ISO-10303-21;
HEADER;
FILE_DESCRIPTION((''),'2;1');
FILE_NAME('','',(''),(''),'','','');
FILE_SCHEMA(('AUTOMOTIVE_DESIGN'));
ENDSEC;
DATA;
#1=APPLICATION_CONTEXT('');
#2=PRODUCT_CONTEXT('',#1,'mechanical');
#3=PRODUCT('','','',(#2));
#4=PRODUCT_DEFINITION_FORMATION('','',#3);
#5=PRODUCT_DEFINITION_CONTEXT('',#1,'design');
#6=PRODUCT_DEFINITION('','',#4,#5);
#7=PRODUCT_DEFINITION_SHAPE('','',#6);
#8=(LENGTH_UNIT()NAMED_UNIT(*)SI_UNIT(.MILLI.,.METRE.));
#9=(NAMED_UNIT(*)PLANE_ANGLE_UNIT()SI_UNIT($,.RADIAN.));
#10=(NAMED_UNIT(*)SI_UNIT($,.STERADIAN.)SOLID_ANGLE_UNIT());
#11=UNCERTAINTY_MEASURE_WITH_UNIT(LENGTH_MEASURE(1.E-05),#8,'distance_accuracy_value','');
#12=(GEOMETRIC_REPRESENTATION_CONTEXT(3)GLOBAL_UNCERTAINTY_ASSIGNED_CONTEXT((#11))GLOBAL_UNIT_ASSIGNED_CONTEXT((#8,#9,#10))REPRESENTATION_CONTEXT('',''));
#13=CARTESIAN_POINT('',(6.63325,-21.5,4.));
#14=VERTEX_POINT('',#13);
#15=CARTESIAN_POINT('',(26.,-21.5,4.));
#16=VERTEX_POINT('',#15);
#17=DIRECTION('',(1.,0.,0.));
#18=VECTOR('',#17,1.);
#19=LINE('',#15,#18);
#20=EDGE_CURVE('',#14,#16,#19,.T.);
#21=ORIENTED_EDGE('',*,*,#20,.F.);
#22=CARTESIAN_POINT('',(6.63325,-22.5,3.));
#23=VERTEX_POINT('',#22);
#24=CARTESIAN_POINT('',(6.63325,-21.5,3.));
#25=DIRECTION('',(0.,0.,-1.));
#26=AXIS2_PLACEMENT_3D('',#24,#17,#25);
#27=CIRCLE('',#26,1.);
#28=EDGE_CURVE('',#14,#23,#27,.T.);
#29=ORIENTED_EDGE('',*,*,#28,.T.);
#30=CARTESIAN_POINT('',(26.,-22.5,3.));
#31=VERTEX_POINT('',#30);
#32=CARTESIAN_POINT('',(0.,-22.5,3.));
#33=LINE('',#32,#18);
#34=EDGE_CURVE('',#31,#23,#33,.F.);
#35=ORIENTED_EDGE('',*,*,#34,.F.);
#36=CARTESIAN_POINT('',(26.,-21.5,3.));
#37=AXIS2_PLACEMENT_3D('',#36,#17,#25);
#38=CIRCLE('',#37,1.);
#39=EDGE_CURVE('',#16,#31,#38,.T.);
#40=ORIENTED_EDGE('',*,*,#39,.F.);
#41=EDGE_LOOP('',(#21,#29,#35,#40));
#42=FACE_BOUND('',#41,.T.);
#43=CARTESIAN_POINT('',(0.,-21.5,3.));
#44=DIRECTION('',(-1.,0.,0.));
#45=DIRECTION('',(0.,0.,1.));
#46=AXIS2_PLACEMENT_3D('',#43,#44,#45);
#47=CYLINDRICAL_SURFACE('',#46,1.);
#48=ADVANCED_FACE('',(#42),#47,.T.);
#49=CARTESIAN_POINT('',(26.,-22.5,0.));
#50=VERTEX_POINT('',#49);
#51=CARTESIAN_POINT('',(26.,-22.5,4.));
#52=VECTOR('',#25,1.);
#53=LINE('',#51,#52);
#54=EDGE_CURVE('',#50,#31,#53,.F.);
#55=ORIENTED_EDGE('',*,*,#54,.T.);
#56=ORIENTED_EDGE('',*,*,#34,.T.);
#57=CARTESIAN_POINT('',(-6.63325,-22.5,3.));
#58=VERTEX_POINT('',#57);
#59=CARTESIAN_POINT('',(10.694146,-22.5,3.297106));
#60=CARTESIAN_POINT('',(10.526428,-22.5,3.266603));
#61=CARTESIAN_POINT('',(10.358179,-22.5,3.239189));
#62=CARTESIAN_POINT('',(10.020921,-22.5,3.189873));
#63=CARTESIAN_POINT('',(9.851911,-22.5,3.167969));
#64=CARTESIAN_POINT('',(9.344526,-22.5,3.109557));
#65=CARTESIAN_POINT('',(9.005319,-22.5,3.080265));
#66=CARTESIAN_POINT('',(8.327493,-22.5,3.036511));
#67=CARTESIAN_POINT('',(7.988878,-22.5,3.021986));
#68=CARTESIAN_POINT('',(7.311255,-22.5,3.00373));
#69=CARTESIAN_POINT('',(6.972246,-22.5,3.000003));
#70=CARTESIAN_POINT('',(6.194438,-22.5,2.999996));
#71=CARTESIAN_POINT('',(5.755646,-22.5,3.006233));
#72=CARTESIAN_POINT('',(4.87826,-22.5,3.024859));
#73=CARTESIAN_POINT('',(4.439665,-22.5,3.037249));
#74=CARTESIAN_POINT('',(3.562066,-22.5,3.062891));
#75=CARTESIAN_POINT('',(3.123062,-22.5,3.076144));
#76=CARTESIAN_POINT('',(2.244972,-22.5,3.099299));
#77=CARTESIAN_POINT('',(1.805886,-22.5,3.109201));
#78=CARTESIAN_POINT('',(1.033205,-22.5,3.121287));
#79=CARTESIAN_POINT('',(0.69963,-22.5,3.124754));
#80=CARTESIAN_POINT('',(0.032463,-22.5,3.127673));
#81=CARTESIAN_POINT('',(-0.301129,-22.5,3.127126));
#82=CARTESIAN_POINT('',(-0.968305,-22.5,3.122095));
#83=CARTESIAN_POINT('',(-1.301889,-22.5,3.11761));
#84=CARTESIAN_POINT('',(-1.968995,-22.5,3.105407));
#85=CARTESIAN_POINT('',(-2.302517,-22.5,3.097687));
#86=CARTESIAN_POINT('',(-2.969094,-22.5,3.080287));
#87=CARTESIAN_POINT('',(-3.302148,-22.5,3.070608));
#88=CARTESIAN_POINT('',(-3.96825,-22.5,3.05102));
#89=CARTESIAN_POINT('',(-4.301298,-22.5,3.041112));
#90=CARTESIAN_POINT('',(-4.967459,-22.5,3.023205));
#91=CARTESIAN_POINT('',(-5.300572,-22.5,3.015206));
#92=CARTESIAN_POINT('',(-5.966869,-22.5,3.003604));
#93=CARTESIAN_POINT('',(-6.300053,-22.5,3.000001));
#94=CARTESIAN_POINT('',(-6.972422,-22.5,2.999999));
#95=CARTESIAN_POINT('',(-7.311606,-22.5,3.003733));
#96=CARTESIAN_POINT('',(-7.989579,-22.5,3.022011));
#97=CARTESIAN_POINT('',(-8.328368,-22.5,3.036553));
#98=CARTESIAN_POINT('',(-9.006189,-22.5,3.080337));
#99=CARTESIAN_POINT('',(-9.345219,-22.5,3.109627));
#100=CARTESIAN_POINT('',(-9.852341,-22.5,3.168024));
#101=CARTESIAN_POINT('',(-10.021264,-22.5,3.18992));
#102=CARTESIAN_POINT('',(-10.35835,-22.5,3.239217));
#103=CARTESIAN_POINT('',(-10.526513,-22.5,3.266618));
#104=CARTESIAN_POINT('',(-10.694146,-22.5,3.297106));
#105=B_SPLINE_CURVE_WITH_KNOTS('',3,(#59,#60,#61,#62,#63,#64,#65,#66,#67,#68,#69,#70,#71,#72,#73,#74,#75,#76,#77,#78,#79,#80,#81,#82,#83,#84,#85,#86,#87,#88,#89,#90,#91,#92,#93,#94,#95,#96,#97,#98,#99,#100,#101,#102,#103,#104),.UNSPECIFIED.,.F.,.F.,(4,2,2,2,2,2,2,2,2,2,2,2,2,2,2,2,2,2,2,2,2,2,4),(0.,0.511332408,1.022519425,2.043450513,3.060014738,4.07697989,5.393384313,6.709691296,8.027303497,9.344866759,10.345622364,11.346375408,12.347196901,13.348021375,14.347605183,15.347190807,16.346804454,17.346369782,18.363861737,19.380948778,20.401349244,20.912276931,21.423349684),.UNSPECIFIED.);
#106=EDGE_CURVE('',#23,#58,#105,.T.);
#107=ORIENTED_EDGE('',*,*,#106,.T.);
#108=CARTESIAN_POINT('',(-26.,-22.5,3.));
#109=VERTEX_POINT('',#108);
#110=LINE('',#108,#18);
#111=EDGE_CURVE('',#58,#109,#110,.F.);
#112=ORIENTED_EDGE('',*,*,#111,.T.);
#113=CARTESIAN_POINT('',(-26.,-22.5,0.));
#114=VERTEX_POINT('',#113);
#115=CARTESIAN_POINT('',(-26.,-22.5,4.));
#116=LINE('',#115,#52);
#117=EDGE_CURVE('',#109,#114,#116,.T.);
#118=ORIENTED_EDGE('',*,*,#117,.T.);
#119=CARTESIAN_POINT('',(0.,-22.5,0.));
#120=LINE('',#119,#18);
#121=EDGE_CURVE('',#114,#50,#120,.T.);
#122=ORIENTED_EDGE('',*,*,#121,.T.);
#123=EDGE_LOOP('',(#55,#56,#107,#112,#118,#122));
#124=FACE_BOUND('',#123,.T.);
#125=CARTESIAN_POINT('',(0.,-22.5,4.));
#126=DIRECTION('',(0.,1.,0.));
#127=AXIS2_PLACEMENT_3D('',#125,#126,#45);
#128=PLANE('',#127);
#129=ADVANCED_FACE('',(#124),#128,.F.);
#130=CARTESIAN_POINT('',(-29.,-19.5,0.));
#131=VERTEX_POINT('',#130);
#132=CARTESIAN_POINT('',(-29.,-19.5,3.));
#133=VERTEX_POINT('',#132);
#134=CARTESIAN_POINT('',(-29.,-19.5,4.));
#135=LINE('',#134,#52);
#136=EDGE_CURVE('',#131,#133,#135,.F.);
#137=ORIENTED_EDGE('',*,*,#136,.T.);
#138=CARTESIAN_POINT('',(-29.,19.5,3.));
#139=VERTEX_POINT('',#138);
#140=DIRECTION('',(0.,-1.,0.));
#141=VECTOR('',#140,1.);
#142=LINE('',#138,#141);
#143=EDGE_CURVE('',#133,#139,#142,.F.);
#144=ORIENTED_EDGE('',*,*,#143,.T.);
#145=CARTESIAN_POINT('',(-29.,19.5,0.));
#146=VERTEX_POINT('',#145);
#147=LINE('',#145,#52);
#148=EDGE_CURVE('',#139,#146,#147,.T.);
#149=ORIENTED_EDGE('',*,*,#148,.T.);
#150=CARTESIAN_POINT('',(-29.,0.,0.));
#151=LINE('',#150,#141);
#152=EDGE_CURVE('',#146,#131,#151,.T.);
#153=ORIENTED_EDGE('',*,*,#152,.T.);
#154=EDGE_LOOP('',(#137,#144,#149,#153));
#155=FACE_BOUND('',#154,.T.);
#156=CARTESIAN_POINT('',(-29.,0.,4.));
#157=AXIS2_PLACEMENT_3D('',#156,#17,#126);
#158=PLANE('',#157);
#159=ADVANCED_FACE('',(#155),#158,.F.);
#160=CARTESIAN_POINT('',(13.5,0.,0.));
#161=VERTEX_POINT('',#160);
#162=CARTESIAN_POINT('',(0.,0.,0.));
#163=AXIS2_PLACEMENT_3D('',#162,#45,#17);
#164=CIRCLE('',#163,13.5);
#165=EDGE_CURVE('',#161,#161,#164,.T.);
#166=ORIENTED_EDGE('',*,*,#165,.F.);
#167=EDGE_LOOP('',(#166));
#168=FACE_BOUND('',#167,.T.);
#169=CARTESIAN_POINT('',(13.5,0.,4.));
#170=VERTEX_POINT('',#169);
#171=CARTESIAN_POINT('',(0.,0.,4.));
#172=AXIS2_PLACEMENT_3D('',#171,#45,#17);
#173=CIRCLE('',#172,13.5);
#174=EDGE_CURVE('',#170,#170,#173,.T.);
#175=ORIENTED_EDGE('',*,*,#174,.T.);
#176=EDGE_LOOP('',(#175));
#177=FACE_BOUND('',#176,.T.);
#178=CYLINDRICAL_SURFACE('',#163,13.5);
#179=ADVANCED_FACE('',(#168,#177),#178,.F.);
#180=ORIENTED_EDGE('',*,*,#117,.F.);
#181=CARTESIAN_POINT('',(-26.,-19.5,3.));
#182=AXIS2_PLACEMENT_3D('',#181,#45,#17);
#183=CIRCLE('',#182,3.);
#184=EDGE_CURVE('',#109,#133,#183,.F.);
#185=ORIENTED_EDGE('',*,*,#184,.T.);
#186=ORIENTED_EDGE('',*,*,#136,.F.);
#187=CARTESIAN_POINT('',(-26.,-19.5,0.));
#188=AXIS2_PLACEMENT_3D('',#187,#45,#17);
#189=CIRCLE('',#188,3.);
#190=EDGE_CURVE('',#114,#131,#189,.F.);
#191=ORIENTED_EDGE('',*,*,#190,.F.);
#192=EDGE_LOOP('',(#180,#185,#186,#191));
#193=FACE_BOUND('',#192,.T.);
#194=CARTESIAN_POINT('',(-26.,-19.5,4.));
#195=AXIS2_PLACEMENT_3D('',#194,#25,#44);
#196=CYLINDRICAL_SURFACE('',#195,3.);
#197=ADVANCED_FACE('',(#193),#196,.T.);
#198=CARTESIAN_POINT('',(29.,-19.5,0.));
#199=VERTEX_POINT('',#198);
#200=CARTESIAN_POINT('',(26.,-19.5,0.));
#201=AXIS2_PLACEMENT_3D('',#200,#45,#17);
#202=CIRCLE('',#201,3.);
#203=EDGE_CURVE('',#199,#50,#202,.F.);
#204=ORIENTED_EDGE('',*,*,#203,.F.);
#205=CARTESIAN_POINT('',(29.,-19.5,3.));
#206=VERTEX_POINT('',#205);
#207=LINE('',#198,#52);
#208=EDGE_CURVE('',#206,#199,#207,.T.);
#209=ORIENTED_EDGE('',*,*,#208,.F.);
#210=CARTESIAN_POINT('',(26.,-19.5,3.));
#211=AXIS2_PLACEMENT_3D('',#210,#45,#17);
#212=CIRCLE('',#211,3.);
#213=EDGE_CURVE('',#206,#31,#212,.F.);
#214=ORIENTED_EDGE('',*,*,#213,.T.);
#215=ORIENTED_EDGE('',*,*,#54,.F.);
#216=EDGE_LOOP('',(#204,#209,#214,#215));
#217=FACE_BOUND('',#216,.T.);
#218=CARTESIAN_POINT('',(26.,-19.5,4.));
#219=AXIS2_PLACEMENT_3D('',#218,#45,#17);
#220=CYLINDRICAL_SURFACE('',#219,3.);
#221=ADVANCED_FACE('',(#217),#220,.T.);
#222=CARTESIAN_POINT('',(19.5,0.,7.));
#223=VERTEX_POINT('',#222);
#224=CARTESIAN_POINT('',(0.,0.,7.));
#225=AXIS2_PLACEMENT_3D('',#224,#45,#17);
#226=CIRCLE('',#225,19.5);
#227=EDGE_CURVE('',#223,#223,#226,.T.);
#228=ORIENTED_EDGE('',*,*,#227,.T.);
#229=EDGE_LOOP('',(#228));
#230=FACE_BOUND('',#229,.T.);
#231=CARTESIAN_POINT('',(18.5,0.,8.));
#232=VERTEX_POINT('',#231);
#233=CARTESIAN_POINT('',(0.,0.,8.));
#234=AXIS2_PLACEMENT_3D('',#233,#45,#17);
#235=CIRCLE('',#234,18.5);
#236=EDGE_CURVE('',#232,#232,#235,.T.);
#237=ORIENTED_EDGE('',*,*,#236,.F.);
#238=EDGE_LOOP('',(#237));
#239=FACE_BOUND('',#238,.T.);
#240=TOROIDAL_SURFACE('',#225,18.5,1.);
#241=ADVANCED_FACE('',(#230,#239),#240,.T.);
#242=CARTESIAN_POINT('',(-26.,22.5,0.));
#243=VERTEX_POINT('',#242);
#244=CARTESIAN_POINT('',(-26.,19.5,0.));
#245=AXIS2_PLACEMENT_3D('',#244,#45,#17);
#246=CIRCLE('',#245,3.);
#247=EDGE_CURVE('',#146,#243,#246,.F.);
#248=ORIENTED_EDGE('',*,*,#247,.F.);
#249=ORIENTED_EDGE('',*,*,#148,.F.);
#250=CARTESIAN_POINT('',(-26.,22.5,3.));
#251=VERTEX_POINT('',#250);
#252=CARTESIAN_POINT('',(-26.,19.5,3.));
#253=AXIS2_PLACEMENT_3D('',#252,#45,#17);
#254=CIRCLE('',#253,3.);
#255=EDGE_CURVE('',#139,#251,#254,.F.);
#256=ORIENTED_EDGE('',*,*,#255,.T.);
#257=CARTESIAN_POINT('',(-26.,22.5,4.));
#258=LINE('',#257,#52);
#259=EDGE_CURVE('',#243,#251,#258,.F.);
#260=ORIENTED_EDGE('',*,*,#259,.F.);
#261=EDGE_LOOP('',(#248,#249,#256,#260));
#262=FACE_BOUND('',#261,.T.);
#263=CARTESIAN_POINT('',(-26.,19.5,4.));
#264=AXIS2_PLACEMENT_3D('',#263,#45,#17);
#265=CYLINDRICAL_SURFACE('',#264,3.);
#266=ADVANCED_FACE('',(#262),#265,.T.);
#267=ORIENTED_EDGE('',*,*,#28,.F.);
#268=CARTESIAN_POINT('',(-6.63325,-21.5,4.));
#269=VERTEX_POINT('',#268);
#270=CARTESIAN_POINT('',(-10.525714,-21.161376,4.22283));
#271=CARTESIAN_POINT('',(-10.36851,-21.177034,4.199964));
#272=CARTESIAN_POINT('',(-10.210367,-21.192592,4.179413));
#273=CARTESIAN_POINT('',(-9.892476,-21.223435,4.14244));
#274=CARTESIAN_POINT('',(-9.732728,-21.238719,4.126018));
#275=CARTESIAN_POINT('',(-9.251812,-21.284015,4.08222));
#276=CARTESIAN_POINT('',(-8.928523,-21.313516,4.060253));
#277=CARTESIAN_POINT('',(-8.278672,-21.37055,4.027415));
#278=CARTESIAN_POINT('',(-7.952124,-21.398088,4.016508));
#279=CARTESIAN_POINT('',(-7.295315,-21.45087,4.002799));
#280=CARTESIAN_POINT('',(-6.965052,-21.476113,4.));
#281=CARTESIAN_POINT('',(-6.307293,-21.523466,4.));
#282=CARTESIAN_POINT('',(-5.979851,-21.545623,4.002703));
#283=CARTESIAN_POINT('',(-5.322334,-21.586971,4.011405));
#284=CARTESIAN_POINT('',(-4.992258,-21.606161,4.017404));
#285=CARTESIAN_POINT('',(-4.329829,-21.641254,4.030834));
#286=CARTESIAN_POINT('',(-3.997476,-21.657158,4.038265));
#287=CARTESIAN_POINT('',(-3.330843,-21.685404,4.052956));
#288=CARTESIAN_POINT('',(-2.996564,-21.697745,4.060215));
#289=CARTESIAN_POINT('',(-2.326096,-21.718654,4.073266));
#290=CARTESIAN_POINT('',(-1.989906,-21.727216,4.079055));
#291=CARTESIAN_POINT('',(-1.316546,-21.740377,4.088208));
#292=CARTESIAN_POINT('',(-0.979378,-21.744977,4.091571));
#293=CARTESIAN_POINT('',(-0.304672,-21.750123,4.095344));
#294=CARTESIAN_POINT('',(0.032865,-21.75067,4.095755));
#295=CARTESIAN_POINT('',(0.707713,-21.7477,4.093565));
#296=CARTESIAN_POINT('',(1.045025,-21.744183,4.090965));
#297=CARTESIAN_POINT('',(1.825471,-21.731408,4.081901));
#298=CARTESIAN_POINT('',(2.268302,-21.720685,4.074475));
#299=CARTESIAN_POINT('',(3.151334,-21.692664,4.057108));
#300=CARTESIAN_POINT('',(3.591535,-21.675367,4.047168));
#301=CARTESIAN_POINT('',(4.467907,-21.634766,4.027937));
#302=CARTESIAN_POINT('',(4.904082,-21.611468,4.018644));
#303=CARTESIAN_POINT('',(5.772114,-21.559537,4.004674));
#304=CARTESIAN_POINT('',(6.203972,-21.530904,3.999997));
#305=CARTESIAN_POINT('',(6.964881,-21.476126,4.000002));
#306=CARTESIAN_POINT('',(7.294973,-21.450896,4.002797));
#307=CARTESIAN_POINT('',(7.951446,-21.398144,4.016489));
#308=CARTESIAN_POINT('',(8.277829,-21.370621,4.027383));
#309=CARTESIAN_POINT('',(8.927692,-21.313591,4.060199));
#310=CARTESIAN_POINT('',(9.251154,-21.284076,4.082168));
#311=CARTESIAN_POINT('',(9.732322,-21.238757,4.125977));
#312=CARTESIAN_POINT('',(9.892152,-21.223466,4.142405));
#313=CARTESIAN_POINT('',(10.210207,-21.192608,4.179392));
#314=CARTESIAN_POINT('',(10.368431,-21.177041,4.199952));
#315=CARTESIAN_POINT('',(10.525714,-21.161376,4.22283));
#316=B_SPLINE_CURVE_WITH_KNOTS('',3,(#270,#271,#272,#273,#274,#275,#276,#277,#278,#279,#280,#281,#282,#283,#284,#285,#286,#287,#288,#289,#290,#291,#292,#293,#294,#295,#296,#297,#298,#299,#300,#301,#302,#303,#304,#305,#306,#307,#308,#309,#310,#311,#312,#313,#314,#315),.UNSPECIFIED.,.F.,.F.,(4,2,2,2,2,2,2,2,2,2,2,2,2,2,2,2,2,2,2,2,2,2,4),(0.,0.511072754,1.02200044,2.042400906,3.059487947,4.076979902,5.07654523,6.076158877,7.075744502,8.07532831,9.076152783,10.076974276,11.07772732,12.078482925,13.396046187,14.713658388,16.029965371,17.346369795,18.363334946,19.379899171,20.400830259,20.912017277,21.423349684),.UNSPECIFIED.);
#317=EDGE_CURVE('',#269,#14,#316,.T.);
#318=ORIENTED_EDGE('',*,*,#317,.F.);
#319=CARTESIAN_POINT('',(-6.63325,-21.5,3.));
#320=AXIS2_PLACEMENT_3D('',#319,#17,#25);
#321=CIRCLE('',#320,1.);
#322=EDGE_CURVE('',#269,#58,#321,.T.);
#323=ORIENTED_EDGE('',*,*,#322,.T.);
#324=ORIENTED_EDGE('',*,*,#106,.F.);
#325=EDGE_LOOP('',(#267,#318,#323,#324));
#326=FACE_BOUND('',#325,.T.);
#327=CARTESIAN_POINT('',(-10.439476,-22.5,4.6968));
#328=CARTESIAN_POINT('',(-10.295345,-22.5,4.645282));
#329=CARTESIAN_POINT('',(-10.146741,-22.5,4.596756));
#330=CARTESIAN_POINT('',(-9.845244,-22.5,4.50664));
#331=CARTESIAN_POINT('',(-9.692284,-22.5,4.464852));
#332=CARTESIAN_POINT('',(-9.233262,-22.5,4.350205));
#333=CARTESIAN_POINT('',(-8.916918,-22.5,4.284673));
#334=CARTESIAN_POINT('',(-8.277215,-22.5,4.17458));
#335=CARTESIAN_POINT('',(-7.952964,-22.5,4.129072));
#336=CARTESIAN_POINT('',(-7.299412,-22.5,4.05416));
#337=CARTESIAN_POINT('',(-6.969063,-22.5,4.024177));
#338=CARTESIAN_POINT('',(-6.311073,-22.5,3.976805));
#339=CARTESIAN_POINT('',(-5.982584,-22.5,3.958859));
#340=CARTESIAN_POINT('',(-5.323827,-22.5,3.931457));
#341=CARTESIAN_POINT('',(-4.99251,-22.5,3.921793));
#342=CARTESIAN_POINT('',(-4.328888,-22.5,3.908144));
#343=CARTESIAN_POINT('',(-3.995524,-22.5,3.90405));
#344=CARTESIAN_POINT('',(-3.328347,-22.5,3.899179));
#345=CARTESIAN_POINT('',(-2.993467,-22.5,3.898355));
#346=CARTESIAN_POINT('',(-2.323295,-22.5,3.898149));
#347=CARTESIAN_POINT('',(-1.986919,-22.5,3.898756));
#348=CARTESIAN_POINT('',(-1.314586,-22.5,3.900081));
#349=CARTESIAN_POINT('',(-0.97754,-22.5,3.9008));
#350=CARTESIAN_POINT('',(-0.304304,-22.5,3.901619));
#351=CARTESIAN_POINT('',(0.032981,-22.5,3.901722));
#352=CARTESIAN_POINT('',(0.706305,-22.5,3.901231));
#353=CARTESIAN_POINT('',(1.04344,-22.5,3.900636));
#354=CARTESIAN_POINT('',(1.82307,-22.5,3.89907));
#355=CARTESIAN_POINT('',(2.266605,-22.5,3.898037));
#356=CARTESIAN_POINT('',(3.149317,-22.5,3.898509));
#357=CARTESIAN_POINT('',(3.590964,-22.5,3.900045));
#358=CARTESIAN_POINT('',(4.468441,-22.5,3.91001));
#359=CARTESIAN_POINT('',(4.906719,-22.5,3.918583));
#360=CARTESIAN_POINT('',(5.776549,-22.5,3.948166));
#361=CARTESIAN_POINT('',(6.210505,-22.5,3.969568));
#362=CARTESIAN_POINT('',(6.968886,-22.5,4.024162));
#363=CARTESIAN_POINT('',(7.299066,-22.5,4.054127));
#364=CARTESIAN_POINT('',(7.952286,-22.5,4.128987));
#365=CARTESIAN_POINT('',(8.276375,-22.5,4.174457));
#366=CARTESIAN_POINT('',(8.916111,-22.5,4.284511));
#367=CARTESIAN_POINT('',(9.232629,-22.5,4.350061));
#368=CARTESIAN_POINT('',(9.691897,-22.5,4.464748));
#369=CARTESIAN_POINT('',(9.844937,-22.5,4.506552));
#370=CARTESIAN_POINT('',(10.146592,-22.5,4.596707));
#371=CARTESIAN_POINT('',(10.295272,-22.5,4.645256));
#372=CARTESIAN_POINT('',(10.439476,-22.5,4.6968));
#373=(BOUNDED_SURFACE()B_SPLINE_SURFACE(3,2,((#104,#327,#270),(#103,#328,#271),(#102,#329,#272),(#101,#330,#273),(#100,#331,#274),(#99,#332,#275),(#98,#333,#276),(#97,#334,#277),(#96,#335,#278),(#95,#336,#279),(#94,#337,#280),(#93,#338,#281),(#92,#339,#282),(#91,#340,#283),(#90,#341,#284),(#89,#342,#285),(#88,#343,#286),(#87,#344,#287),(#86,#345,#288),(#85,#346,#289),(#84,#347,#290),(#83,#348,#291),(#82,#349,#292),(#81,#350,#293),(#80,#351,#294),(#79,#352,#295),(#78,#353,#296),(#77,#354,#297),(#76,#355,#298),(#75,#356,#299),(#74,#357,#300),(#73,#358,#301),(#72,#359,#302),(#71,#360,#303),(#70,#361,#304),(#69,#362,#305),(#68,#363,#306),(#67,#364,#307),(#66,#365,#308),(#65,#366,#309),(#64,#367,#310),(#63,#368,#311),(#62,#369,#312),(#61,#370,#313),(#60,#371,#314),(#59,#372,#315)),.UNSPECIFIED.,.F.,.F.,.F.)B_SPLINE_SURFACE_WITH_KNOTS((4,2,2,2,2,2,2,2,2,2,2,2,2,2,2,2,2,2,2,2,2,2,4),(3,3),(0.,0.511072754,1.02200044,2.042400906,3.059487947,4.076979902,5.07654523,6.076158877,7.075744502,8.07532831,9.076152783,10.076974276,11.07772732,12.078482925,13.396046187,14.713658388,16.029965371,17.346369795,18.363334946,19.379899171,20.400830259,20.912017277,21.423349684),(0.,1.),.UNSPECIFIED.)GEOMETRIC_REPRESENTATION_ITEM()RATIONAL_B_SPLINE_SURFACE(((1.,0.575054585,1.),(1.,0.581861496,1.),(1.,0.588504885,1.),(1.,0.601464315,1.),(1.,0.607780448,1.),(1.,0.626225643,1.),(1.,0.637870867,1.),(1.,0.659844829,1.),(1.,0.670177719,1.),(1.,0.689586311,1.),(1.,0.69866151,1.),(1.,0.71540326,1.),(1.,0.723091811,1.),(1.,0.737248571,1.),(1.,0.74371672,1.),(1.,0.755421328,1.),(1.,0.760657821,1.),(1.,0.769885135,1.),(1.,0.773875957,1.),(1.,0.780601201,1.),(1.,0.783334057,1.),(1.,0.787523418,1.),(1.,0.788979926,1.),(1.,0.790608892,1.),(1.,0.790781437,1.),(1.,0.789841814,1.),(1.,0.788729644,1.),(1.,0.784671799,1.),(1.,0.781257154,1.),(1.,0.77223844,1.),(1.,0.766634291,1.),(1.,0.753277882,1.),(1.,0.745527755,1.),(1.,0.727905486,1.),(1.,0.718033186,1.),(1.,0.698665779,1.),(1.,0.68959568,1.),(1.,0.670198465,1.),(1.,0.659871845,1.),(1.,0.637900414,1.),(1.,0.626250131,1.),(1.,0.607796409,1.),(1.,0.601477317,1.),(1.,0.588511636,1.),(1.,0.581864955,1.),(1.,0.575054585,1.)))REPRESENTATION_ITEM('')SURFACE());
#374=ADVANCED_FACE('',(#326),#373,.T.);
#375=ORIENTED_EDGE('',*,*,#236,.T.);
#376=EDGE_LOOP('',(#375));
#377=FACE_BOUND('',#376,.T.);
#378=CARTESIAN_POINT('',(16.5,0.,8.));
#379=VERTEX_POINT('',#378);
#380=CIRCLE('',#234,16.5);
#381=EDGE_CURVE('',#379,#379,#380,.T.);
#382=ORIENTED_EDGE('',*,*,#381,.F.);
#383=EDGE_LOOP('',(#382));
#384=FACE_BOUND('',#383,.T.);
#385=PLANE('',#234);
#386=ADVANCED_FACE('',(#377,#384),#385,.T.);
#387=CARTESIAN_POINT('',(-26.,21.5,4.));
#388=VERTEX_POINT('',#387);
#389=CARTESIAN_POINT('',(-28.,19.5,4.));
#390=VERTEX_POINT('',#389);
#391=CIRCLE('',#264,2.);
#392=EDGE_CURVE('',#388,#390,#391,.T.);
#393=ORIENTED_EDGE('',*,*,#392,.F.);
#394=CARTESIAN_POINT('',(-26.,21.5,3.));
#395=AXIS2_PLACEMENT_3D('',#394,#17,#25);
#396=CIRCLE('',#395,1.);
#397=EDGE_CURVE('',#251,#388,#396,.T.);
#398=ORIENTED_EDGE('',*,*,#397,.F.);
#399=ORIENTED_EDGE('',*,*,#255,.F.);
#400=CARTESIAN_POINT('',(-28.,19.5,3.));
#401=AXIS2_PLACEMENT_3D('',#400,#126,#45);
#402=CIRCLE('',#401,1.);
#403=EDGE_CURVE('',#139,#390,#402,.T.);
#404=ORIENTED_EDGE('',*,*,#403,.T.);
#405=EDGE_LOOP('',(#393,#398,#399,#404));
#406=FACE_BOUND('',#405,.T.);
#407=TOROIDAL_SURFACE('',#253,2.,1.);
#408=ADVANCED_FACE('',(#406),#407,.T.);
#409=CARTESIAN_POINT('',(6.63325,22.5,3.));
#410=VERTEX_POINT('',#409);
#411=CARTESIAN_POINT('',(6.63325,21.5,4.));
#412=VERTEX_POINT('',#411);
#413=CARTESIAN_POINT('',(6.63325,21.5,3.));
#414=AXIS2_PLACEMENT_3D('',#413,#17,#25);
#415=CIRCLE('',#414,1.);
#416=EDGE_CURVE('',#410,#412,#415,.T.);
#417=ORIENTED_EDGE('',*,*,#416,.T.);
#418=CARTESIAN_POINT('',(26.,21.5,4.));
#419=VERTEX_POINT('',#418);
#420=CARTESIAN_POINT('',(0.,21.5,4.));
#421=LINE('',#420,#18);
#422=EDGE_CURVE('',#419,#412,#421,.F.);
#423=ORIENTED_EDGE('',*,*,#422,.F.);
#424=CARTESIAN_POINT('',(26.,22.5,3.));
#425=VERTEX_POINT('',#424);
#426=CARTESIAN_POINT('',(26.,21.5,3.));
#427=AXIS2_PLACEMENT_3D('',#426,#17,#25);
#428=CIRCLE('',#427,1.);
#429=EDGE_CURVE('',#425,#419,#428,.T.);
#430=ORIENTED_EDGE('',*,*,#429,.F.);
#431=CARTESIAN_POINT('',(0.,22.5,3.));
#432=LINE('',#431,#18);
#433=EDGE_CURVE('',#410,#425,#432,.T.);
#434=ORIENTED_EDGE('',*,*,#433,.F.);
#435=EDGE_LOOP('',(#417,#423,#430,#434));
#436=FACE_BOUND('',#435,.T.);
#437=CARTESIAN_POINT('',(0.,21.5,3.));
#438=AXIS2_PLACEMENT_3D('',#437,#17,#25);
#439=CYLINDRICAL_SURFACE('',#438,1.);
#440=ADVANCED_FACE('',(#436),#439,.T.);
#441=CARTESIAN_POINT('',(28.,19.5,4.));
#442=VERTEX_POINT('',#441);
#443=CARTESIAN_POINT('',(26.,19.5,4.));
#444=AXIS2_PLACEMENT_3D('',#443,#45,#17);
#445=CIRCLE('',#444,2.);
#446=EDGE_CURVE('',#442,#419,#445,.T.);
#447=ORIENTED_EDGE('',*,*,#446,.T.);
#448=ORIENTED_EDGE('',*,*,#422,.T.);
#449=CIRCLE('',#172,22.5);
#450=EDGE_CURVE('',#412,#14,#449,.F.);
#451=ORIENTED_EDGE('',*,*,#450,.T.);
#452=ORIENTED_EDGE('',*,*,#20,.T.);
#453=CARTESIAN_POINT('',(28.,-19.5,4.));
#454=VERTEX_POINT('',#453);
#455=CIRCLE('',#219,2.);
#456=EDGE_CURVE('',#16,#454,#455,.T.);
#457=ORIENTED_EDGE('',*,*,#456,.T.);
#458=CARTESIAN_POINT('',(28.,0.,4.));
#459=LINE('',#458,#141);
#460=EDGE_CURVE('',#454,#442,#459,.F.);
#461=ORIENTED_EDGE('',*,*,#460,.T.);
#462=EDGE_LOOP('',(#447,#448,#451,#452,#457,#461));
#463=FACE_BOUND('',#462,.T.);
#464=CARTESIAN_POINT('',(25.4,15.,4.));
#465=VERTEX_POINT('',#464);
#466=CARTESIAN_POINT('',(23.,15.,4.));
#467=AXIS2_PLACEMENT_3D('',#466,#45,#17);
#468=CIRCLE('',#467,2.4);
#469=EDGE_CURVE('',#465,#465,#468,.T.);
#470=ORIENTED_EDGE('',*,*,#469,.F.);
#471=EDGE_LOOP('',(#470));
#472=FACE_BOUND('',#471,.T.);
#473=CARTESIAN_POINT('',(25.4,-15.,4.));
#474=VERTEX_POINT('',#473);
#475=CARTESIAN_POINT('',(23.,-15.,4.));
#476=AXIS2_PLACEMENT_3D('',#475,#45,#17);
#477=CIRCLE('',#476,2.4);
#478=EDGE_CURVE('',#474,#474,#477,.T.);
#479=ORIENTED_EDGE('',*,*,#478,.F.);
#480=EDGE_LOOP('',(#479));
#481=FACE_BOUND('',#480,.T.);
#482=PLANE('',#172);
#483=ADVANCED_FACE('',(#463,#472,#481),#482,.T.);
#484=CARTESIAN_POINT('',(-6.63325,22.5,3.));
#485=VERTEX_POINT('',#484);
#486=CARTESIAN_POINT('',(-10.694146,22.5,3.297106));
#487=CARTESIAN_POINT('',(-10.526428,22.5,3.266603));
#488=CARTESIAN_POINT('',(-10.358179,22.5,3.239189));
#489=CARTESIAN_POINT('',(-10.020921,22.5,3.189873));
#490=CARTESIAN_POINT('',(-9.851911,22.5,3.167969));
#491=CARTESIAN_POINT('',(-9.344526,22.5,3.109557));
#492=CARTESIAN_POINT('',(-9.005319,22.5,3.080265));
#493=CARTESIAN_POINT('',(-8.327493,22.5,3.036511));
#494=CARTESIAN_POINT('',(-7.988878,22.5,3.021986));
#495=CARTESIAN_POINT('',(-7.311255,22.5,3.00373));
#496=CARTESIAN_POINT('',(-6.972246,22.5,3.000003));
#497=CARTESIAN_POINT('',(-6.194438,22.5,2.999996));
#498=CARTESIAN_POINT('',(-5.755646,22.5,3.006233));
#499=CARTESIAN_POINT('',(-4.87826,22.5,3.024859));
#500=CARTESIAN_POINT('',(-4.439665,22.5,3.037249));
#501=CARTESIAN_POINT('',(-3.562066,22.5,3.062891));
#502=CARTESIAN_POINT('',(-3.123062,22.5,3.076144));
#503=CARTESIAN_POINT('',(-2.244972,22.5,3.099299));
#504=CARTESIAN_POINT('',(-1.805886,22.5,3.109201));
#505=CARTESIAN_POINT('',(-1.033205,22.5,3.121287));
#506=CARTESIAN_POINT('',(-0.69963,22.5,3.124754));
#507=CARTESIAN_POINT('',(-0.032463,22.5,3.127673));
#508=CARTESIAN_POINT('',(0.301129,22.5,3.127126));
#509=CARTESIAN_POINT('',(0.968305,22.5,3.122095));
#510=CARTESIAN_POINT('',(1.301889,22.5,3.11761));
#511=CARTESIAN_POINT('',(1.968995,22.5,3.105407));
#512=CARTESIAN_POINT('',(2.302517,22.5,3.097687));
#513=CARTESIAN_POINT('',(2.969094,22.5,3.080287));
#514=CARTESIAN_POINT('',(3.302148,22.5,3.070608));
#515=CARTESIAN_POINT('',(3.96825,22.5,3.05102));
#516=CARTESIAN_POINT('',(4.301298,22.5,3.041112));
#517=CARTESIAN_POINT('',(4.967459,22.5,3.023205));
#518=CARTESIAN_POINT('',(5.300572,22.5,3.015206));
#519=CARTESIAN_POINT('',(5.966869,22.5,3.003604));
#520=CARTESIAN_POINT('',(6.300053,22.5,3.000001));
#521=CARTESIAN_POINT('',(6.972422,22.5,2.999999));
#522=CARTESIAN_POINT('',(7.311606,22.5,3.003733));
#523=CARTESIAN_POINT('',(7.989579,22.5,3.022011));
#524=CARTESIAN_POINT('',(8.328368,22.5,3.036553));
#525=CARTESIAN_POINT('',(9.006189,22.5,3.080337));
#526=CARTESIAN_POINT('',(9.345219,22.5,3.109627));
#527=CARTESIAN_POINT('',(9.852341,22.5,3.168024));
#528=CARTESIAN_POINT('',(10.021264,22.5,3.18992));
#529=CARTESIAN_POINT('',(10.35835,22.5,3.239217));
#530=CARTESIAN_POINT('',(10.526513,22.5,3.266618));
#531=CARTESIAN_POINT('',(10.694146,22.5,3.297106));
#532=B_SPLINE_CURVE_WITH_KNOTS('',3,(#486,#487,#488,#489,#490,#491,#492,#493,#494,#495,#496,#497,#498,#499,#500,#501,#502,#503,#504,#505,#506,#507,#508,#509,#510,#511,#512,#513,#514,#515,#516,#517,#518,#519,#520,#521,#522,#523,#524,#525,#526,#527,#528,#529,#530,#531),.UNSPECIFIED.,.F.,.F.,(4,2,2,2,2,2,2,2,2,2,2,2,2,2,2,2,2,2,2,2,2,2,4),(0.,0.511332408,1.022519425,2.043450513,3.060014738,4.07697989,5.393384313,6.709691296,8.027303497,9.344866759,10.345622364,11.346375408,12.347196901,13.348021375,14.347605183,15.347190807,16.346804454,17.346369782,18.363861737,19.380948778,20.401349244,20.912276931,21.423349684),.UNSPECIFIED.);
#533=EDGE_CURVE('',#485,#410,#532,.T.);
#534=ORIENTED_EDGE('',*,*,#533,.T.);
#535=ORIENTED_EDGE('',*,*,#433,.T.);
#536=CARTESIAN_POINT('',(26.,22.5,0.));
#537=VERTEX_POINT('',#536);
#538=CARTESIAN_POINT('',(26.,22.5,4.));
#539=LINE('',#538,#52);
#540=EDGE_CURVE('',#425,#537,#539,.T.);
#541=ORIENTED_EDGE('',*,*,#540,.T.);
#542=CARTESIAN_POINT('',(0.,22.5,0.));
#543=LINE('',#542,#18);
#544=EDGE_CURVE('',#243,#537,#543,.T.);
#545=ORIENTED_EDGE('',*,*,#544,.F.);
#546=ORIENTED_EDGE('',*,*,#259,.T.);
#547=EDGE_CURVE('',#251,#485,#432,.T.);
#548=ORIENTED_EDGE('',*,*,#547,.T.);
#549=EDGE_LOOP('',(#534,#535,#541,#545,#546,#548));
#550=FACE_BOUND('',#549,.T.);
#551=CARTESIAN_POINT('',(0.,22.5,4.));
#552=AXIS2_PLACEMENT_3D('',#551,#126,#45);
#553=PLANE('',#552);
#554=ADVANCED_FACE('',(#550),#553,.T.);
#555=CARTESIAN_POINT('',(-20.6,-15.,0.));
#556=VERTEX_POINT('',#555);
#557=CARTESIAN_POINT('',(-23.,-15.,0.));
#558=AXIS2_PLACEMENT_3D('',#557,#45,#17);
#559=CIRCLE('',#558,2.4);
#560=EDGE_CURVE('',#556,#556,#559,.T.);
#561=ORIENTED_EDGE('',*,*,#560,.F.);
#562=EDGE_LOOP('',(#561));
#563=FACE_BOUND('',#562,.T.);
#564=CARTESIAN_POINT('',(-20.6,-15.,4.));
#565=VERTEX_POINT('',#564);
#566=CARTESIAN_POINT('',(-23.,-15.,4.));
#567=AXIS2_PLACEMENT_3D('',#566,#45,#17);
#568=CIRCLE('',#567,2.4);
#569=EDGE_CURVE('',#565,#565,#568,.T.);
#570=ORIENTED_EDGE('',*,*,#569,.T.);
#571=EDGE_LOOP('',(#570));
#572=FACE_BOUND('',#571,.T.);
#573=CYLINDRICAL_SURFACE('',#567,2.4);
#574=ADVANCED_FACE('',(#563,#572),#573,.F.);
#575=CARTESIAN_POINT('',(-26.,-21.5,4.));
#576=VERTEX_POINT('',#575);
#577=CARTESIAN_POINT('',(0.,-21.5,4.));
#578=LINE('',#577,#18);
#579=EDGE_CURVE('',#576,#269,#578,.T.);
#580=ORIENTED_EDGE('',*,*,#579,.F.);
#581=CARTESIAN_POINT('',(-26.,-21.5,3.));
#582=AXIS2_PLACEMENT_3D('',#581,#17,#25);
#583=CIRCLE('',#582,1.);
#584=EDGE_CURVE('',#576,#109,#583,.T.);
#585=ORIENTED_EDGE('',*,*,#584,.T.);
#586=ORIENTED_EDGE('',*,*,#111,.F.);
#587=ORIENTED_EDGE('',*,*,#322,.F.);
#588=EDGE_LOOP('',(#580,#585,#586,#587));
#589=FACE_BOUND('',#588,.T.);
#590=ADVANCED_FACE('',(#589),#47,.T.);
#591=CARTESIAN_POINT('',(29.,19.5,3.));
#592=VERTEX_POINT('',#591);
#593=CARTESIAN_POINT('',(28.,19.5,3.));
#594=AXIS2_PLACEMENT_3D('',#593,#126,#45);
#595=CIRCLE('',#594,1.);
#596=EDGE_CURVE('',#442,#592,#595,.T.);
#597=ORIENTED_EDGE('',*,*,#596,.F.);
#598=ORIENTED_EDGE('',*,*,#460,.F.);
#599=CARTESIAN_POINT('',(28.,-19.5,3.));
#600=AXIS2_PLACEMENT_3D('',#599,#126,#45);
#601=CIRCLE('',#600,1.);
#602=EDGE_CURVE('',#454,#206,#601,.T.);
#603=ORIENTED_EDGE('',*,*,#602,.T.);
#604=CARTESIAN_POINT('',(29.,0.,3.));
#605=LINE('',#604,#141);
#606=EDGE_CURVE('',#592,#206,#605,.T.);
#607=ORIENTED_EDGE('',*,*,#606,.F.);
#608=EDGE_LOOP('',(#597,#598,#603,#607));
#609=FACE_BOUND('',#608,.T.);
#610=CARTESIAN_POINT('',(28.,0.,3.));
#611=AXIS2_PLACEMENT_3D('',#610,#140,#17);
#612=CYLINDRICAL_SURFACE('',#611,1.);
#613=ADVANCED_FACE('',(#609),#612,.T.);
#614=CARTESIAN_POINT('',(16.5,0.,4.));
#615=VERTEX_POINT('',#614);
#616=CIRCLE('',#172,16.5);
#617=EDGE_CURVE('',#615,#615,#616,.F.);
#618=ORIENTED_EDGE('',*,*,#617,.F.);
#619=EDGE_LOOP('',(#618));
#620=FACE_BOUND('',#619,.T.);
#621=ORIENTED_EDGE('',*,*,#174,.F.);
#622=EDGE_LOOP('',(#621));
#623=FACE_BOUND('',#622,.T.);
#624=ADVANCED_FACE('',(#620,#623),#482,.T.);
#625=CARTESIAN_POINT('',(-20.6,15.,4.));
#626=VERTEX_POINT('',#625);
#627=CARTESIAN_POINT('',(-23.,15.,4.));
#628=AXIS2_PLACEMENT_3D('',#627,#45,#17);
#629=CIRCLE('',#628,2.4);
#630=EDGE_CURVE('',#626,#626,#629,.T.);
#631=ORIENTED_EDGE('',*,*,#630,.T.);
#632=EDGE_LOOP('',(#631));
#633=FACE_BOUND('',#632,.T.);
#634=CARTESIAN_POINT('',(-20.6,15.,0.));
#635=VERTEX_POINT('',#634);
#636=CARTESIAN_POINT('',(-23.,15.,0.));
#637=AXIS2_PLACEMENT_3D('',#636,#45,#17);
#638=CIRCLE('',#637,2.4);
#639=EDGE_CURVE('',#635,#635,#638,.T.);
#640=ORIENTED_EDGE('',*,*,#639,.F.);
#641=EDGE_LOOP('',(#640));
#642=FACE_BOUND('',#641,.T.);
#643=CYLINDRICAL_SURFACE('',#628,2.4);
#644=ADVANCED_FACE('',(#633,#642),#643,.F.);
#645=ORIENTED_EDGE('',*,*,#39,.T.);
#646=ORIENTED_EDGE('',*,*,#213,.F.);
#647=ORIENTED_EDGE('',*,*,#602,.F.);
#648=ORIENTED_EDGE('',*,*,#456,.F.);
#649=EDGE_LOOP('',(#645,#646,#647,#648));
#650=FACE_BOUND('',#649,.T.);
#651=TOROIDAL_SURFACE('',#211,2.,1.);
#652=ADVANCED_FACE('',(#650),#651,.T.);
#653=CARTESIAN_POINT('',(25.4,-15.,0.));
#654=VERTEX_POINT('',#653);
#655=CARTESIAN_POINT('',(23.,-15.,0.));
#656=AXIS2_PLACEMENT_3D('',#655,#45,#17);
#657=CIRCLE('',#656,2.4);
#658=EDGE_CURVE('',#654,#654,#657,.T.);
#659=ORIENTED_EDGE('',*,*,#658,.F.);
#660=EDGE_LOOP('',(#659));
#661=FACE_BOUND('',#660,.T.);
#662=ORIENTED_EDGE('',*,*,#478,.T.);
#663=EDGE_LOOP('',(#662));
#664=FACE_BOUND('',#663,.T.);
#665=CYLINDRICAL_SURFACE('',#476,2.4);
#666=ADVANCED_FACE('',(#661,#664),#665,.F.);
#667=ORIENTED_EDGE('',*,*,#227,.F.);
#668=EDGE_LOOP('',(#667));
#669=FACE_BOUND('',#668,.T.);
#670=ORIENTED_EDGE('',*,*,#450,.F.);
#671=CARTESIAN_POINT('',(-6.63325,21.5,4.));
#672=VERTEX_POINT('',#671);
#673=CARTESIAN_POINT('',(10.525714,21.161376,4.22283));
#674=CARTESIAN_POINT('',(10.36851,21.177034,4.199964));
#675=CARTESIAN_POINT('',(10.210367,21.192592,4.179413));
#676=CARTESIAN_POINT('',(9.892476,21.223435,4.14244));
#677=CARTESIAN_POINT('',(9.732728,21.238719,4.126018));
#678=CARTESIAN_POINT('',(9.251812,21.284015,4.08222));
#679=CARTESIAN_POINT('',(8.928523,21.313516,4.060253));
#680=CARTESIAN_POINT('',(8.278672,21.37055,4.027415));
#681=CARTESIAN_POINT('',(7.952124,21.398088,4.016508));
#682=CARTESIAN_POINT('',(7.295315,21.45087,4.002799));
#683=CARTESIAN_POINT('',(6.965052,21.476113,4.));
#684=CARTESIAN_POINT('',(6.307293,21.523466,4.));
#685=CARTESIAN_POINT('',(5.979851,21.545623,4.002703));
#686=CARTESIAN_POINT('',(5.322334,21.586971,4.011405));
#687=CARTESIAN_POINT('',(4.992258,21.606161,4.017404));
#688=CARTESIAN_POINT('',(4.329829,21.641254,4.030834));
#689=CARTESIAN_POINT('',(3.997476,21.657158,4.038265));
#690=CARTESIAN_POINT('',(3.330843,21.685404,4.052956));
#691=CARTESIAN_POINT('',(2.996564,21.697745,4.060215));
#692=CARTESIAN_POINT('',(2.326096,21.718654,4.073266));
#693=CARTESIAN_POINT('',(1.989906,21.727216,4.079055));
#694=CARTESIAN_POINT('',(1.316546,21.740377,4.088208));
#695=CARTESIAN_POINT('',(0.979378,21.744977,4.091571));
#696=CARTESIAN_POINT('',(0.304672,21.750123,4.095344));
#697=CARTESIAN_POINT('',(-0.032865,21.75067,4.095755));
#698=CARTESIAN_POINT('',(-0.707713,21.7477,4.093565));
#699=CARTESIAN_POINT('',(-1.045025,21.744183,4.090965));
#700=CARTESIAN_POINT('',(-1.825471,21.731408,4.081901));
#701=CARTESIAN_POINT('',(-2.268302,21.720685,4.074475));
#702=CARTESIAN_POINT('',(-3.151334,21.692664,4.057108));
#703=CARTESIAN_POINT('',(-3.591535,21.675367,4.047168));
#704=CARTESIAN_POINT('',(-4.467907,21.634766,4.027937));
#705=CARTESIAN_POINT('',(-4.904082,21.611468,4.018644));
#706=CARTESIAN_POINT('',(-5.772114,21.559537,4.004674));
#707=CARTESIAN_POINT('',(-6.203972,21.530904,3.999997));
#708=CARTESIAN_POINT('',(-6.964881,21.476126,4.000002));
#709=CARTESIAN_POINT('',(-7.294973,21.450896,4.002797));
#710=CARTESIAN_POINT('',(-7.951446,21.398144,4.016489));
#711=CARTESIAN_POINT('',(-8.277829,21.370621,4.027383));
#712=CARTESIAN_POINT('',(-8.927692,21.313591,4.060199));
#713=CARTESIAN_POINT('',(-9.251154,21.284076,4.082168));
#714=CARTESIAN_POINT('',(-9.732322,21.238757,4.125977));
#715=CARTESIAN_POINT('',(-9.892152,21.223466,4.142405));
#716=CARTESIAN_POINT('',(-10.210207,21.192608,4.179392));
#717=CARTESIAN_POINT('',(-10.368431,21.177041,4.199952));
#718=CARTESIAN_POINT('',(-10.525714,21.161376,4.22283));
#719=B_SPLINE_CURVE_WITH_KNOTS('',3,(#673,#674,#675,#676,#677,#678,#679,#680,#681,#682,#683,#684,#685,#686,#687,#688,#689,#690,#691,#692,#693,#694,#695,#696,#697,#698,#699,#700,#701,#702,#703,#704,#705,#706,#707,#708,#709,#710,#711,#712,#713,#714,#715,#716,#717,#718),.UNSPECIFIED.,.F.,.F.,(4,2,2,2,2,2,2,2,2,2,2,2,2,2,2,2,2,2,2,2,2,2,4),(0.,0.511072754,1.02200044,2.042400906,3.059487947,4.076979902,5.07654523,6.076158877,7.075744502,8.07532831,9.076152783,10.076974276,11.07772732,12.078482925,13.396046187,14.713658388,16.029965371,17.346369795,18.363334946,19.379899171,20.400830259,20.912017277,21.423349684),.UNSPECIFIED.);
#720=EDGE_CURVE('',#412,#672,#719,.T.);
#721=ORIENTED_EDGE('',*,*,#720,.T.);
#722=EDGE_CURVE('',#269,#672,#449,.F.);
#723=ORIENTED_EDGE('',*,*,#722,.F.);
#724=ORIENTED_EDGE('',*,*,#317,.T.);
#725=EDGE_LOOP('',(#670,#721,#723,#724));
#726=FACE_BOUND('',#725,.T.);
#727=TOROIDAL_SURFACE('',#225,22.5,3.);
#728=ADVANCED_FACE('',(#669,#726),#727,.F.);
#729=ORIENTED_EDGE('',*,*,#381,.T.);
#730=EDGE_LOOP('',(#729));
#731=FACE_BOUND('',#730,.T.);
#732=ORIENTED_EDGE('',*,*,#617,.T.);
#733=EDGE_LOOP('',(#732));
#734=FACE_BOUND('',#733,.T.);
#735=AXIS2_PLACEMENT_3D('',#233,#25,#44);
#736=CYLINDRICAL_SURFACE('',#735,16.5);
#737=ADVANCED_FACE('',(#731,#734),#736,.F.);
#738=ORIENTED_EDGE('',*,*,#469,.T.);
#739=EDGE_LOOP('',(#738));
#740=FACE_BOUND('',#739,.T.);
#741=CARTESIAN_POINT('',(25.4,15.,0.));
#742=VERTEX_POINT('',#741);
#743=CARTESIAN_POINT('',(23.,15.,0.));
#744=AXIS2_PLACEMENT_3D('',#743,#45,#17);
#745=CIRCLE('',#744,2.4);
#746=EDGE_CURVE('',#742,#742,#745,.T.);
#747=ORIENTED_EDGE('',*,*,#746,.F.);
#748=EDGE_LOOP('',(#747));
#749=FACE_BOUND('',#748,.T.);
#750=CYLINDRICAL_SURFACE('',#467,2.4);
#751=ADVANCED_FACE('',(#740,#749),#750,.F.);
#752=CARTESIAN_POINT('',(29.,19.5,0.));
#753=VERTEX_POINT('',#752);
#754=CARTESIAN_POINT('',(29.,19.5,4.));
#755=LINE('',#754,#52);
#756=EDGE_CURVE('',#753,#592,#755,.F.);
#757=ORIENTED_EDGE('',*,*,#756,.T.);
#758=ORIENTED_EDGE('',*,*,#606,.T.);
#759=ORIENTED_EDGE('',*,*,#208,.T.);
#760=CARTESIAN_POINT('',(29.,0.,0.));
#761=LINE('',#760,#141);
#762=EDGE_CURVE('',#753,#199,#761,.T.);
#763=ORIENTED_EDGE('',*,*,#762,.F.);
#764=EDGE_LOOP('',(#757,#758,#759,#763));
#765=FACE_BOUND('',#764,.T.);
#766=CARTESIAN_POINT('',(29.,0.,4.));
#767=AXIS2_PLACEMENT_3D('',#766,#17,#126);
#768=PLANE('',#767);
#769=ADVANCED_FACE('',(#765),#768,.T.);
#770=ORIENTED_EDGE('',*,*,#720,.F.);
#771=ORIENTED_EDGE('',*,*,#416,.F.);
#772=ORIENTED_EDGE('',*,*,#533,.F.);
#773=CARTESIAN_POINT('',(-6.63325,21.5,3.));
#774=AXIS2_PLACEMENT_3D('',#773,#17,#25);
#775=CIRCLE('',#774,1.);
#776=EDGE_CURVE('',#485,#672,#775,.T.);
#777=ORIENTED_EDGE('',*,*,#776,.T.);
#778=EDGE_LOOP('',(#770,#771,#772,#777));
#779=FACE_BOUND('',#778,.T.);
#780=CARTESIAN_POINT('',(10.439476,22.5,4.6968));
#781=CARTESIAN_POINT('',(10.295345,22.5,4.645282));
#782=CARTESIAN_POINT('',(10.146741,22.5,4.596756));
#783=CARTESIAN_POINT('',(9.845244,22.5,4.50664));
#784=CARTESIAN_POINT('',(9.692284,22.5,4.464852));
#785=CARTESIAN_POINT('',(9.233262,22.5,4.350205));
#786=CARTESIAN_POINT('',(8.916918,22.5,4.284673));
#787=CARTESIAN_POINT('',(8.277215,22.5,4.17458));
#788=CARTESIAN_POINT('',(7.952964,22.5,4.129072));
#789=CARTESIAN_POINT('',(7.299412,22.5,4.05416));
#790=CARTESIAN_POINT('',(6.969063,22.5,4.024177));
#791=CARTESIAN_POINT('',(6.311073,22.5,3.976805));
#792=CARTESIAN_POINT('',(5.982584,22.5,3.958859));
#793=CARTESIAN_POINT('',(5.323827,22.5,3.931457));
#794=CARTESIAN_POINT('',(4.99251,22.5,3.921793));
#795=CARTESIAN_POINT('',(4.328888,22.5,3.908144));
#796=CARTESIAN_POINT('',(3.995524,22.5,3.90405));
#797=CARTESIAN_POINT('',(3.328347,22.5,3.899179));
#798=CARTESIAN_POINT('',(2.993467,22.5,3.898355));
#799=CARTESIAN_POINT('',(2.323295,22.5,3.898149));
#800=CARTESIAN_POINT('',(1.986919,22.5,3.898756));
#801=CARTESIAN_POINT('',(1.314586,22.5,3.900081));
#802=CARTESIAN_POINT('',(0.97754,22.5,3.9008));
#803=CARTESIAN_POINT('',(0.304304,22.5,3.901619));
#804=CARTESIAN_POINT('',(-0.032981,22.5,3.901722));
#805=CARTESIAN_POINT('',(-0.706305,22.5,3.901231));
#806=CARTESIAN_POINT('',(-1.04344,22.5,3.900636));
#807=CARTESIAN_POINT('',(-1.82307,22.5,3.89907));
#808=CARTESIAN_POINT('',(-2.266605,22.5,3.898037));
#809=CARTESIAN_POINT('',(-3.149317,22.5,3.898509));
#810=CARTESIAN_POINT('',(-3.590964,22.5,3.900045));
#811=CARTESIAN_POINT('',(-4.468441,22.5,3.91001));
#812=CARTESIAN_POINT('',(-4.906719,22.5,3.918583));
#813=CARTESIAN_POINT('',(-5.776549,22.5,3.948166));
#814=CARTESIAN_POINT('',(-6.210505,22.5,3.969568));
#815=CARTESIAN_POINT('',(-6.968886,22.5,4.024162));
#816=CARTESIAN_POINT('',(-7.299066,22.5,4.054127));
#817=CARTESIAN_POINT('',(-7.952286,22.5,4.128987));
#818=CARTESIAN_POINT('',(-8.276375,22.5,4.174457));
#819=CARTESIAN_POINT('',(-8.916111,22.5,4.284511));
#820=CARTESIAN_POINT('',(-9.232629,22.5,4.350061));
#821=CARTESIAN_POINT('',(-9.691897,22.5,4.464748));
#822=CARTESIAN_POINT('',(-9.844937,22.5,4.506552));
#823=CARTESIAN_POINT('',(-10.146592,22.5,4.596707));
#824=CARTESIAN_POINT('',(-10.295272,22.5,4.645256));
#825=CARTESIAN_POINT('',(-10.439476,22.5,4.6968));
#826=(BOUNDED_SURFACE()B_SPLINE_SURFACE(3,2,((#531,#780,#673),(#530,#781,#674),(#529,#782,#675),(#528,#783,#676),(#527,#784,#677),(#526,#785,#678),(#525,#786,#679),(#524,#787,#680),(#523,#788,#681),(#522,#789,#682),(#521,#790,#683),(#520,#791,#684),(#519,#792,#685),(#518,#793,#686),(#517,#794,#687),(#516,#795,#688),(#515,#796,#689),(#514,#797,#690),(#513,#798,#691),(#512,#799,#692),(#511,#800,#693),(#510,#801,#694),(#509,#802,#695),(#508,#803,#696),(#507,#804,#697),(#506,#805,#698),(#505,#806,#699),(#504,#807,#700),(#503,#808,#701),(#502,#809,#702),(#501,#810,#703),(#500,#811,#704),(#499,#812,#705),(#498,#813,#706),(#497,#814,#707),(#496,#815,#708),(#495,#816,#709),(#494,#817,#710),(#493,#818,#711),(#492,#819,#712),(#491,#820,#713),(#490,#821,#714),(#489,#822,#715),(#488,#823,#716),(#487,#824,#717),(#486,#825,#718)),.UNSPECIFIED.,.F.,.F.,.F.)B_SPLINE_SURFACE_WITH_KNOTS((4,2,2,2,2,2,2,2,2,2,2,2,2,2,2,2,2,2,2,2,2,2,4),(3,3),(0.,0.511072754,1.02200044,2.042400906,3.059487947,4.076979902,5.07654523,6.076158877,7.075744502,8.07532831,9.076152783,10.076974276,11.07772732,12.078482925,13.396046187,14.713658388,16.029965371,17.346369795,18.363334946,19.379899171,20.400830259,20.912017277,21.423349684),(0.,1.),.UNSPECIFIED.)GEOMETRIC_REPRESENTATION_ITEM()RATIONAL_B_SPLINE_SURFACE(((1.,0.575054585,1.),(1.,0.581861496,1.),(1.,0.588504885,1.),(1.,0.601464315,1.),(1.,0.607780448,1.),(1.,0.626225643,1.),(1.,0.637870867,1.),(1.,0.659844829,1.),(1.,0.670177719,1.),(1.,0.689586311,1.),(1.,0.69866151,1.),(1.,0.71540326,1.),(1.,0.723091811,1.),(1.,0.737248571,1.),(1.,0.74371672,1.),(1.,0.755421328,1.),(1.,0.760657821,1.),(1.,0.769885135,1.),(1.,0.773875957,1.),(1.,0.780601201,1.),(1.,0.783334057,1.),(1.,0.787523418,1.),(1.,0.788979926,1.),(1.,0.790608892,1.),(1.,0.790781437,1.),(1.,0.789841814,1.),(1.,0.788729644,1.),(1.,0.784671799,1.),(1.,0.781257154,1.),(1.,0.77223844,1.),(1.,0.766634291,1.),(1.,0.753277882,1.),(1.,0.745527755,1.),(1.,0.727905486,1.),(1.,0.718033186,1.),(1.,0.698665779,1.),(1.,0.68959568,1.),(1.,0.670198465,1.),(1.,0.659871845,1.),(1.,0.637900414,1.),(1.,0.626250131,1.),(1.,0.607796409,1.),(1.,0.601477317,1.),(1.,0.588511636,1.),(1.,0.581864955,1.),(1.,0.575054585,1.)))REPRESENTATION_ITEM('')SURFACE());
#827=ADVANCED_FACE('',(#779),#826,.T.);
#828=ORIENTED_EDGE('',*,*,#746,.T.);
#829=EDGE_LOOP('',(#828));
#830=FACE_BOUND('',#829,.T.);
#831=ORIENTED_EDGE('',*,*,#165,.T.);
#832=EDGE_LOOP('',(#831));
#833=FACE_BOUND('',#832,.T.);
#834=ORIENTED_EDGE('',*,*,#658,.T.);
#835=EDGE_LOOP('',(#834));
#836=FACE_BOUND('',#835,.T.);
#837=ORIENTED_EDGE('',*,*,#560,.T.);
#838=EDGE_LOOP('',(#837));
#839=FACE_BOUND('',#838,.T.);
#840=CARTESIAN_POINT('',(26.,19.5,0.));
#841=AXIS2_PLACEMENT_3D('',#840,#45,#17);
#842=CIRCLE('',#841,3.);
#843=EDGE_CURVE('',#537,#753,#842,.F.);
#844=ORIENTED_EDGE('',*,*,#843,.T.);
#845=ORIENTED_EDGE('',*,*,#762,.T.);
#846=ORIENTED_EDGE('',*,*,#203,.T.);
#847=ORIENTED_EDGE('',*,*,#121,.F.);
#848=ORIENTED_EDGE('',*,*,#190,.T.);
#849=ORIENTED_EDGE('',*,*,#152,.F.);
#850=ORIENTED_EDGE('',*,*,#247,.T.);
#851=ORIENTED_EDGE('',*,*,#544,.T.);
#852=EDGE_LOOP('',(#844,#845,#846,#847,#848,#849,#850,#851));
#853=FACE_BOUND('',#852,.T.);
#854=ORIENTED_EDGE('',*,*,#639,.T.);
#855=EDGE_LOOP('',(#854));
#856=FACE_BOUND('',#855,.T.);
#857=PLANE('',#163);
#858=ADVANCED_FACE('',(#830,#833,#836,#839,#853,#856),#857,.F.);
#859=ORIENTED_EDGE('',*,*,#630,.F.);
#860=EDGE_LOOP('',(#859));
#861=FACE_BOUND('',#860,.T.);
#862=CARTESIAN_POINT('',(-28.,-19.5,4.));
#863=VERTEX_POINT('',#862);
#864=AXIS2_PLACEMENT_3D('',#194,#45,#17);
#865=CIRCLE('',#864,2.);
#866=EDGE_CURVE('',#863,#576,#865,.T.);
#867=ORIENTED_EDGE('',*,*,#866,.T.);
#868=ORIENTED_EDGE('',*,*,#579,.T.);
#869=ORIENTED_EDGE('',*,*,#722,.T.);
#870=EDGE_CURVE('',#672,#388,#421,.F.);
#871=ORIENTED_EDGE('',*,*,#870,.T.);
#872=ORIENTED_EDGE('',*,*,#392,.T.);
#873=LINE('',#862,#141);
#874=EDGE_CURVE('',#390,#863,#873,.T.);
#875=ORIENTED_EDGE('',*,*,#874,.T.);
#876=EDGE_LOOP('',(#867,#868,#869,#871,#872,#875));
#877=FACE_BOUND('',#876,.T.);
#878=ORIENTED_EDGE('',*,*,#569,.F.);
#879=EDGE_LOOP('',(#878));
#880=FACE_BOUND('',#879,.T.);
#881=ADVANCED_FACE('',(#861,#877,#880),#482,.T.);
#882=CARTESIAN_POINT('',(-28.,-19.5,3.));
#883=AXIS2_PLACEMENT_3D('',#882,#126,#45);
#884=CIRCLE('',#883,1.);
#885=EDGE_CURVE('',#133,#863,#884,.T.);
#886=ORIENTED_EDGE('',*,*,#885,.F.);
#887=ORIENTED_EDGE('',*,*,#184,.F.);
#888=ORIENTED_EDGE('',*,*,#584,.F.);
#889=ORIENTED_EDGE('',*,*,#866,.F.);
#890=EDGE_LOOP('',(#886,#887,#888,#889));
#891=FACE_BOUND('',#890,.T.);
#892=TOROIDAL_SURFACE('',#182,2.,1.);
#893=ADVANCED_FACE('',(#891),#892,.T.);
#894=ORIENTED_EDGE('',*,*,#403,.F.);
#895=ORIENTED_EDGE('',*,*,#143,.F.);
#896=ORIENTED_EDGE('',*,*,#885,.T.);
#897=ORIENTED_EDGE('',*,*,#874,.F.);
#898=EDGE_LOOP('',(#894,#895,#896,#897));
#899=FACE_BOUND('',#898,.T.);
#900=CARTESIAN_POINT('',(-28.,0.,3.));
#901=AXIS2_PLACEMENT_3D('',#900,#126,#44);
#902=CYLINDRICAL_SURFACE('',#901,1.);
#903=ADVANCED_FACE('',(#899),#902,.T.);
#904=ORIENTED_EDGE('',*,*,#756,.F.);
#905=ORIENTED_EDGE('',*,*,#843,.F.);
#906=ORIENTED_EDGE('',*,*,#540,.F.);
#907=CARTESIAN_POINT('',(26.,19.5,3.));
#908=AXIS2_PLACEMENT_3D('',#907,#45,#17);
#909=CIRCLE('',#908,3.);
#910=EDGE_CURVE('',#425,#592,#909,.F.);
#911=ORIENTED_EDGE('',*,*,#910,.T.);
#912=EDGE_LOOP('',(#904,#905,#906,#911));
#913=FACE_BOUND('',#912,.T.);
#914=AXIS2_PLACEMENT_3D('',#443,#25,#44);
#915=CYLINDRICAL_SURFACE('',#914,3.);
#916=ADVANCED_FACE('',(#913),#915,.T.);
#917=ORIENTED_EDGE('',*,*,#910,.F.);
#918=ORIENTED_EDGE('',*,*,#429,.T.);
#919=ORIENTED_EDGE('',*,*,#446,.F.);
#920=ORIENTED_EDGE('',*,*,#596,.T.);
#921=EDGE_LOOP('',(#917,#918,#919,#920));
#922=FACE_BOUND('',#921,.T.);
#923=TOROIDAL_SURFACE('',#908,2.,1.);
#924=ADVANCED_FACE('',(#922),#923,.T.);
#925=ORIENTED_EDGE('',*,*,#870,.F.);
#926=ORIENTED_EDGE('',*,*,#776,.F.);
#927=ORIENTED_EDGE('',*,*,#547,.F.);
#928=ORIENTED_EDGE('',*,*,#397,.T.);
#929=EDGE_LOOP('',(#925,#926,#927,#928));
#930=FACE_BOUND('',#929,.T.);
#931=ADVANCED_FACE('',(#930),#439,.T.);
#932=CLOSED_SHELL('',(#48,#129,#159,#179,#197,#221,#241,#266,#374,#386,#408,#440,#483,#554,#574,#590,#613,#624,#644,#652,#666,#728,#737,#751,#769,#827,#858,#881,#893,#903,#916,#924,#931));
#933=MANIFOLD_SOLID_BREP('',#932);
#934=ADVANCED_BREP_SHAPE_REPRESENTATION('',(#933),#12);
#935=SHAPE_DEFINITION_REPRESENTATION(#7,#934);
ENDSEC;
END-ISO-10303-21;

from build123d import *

# Parameters (mm, degrees)
SKETCH1_W            = 58
SKETCH1_H            = 45
SKETCH1_R            = 2
BOSS_EXTRUDE1_DEPTH  = 4
SKETCH4_R            = 19.5
SKETCH4_R_2          = 16.5
BOSS_EXTRUDE3_DEPTH  = 4
SKETCH5_R            = 13.5
CUT_EXTRUDE2_DEPTH   = 37.922215535
M4_CLEARANCE_HOLE1_D = 4.8
FILLET1_R            = 3
FILLET2_R            = 1


with BuildPart() as part:
    # Sketch1 → Boss-Extrude1 (new body)
    # profile 1 of 5: a face of its own
    with BuildSketch(Plane.XY):
        Rectangle(SKETCH1_W, SKETCH1_H)
        with Locations((23, 15)):
            Circle(SKETCH1_R, mode=Mode.SUBTRACT)
        with Locations((23, -15)):
            Circle(SKETCH1_R, mode=Mode.SUBTRACT)
        with Locations((-23, -15)):
            Circle(SKETCH1_R, mode=Mode.SUBTRACT)
        with Locations((-23, 15)):
            Circle(SKETCH1_R, mode=Mode.SUBTRACT)
    # profile 2 of 5: a face of its own
    with BuildSketch(Plane.XY):
        with Locations((-23, 15)):
            Circle(SKETCH1_R)
    # profile 3 of 5: a face of its own
    with BuildSketch(Plane.XY):
        with Locations((-23, -15)):
            Circle(SKETCH1_R)
    # profile 4 of 5: a face of its own
    with BuildSketch(Plane.XY):
        with Locations((23, -15)):
            Circle(SKETCH1_R)
    # profile 5 of 5: a face of its own
    with BuildSketch(Plane.XY):
        with Locations((23, 15)):
            Circle(SKETCH1_R)
    extrude(amount=BOSS_EXTRUDE1_DEPTH)

    # Sketch4 → Boss-Extrude3 (add)
    with BuildSketch(Plane.XY.offset(4)):
        Circle(SKETCH4_R)
        Circle(SKETCH4_R_2, mode=Mode.SUBTRACT)
    extrude(amount=BOSS_EXTRUDE3_DEPTH)

    # Sketch5 → Cut-Extrude2 (cut, through all)
    with BuildSketch(Plane.XY.offset(4)):
        Circle(SKETCH5_R)
    extrude(amount=-CUT_EXTRUDE2_DEPTH, mode=Mode.SUBTRACT)

    # M4 Clearance Hole1 (through all)
    with Locations(Plane.XY.offset(4)):
        with Locations((23, 15), (23, -15), (-23, -15), (-23, 15)):
            Hole(M4_CLEARANCE_HOLE1_D / 2)

    # Fillet1
    fillet1_edges = [part.edges().sort_by_distance(p)[0] for p in [
        (-19.5, 0, 4),
        (29, -22.5, 2),
        (-29, -22.5, 2),
        (-29, 22.5, 2),
        (29, 22.5, 2),
    ]]
    fillet(fillet1_edges, radius=FILLET1_R - 0.0001)  # a hair under: the kernel refuses the full size

    # Fillet2
    fillet2_edges = [part.edges().sort_by_distance(p)[0] for p in [
        (-19.5, 0, 8),
        (0, -22.5, 4),
        (0, -22.5, 4),
        (-29, 0, 4),
        (29, 0, 4),
        (0, 22.5, 4),
        (0, 22.5, 4),
        (28.121349633, 21.621349633, 4),
        (28.121349633, -21.621349633, 4),
        (-28.121349633, 21.621349633, 4),
        (-28.121349633, -21.621349633, 4),
    ]]
    fillet(fillet2_edges, radius=FILLET2_R)


solid = part.part
